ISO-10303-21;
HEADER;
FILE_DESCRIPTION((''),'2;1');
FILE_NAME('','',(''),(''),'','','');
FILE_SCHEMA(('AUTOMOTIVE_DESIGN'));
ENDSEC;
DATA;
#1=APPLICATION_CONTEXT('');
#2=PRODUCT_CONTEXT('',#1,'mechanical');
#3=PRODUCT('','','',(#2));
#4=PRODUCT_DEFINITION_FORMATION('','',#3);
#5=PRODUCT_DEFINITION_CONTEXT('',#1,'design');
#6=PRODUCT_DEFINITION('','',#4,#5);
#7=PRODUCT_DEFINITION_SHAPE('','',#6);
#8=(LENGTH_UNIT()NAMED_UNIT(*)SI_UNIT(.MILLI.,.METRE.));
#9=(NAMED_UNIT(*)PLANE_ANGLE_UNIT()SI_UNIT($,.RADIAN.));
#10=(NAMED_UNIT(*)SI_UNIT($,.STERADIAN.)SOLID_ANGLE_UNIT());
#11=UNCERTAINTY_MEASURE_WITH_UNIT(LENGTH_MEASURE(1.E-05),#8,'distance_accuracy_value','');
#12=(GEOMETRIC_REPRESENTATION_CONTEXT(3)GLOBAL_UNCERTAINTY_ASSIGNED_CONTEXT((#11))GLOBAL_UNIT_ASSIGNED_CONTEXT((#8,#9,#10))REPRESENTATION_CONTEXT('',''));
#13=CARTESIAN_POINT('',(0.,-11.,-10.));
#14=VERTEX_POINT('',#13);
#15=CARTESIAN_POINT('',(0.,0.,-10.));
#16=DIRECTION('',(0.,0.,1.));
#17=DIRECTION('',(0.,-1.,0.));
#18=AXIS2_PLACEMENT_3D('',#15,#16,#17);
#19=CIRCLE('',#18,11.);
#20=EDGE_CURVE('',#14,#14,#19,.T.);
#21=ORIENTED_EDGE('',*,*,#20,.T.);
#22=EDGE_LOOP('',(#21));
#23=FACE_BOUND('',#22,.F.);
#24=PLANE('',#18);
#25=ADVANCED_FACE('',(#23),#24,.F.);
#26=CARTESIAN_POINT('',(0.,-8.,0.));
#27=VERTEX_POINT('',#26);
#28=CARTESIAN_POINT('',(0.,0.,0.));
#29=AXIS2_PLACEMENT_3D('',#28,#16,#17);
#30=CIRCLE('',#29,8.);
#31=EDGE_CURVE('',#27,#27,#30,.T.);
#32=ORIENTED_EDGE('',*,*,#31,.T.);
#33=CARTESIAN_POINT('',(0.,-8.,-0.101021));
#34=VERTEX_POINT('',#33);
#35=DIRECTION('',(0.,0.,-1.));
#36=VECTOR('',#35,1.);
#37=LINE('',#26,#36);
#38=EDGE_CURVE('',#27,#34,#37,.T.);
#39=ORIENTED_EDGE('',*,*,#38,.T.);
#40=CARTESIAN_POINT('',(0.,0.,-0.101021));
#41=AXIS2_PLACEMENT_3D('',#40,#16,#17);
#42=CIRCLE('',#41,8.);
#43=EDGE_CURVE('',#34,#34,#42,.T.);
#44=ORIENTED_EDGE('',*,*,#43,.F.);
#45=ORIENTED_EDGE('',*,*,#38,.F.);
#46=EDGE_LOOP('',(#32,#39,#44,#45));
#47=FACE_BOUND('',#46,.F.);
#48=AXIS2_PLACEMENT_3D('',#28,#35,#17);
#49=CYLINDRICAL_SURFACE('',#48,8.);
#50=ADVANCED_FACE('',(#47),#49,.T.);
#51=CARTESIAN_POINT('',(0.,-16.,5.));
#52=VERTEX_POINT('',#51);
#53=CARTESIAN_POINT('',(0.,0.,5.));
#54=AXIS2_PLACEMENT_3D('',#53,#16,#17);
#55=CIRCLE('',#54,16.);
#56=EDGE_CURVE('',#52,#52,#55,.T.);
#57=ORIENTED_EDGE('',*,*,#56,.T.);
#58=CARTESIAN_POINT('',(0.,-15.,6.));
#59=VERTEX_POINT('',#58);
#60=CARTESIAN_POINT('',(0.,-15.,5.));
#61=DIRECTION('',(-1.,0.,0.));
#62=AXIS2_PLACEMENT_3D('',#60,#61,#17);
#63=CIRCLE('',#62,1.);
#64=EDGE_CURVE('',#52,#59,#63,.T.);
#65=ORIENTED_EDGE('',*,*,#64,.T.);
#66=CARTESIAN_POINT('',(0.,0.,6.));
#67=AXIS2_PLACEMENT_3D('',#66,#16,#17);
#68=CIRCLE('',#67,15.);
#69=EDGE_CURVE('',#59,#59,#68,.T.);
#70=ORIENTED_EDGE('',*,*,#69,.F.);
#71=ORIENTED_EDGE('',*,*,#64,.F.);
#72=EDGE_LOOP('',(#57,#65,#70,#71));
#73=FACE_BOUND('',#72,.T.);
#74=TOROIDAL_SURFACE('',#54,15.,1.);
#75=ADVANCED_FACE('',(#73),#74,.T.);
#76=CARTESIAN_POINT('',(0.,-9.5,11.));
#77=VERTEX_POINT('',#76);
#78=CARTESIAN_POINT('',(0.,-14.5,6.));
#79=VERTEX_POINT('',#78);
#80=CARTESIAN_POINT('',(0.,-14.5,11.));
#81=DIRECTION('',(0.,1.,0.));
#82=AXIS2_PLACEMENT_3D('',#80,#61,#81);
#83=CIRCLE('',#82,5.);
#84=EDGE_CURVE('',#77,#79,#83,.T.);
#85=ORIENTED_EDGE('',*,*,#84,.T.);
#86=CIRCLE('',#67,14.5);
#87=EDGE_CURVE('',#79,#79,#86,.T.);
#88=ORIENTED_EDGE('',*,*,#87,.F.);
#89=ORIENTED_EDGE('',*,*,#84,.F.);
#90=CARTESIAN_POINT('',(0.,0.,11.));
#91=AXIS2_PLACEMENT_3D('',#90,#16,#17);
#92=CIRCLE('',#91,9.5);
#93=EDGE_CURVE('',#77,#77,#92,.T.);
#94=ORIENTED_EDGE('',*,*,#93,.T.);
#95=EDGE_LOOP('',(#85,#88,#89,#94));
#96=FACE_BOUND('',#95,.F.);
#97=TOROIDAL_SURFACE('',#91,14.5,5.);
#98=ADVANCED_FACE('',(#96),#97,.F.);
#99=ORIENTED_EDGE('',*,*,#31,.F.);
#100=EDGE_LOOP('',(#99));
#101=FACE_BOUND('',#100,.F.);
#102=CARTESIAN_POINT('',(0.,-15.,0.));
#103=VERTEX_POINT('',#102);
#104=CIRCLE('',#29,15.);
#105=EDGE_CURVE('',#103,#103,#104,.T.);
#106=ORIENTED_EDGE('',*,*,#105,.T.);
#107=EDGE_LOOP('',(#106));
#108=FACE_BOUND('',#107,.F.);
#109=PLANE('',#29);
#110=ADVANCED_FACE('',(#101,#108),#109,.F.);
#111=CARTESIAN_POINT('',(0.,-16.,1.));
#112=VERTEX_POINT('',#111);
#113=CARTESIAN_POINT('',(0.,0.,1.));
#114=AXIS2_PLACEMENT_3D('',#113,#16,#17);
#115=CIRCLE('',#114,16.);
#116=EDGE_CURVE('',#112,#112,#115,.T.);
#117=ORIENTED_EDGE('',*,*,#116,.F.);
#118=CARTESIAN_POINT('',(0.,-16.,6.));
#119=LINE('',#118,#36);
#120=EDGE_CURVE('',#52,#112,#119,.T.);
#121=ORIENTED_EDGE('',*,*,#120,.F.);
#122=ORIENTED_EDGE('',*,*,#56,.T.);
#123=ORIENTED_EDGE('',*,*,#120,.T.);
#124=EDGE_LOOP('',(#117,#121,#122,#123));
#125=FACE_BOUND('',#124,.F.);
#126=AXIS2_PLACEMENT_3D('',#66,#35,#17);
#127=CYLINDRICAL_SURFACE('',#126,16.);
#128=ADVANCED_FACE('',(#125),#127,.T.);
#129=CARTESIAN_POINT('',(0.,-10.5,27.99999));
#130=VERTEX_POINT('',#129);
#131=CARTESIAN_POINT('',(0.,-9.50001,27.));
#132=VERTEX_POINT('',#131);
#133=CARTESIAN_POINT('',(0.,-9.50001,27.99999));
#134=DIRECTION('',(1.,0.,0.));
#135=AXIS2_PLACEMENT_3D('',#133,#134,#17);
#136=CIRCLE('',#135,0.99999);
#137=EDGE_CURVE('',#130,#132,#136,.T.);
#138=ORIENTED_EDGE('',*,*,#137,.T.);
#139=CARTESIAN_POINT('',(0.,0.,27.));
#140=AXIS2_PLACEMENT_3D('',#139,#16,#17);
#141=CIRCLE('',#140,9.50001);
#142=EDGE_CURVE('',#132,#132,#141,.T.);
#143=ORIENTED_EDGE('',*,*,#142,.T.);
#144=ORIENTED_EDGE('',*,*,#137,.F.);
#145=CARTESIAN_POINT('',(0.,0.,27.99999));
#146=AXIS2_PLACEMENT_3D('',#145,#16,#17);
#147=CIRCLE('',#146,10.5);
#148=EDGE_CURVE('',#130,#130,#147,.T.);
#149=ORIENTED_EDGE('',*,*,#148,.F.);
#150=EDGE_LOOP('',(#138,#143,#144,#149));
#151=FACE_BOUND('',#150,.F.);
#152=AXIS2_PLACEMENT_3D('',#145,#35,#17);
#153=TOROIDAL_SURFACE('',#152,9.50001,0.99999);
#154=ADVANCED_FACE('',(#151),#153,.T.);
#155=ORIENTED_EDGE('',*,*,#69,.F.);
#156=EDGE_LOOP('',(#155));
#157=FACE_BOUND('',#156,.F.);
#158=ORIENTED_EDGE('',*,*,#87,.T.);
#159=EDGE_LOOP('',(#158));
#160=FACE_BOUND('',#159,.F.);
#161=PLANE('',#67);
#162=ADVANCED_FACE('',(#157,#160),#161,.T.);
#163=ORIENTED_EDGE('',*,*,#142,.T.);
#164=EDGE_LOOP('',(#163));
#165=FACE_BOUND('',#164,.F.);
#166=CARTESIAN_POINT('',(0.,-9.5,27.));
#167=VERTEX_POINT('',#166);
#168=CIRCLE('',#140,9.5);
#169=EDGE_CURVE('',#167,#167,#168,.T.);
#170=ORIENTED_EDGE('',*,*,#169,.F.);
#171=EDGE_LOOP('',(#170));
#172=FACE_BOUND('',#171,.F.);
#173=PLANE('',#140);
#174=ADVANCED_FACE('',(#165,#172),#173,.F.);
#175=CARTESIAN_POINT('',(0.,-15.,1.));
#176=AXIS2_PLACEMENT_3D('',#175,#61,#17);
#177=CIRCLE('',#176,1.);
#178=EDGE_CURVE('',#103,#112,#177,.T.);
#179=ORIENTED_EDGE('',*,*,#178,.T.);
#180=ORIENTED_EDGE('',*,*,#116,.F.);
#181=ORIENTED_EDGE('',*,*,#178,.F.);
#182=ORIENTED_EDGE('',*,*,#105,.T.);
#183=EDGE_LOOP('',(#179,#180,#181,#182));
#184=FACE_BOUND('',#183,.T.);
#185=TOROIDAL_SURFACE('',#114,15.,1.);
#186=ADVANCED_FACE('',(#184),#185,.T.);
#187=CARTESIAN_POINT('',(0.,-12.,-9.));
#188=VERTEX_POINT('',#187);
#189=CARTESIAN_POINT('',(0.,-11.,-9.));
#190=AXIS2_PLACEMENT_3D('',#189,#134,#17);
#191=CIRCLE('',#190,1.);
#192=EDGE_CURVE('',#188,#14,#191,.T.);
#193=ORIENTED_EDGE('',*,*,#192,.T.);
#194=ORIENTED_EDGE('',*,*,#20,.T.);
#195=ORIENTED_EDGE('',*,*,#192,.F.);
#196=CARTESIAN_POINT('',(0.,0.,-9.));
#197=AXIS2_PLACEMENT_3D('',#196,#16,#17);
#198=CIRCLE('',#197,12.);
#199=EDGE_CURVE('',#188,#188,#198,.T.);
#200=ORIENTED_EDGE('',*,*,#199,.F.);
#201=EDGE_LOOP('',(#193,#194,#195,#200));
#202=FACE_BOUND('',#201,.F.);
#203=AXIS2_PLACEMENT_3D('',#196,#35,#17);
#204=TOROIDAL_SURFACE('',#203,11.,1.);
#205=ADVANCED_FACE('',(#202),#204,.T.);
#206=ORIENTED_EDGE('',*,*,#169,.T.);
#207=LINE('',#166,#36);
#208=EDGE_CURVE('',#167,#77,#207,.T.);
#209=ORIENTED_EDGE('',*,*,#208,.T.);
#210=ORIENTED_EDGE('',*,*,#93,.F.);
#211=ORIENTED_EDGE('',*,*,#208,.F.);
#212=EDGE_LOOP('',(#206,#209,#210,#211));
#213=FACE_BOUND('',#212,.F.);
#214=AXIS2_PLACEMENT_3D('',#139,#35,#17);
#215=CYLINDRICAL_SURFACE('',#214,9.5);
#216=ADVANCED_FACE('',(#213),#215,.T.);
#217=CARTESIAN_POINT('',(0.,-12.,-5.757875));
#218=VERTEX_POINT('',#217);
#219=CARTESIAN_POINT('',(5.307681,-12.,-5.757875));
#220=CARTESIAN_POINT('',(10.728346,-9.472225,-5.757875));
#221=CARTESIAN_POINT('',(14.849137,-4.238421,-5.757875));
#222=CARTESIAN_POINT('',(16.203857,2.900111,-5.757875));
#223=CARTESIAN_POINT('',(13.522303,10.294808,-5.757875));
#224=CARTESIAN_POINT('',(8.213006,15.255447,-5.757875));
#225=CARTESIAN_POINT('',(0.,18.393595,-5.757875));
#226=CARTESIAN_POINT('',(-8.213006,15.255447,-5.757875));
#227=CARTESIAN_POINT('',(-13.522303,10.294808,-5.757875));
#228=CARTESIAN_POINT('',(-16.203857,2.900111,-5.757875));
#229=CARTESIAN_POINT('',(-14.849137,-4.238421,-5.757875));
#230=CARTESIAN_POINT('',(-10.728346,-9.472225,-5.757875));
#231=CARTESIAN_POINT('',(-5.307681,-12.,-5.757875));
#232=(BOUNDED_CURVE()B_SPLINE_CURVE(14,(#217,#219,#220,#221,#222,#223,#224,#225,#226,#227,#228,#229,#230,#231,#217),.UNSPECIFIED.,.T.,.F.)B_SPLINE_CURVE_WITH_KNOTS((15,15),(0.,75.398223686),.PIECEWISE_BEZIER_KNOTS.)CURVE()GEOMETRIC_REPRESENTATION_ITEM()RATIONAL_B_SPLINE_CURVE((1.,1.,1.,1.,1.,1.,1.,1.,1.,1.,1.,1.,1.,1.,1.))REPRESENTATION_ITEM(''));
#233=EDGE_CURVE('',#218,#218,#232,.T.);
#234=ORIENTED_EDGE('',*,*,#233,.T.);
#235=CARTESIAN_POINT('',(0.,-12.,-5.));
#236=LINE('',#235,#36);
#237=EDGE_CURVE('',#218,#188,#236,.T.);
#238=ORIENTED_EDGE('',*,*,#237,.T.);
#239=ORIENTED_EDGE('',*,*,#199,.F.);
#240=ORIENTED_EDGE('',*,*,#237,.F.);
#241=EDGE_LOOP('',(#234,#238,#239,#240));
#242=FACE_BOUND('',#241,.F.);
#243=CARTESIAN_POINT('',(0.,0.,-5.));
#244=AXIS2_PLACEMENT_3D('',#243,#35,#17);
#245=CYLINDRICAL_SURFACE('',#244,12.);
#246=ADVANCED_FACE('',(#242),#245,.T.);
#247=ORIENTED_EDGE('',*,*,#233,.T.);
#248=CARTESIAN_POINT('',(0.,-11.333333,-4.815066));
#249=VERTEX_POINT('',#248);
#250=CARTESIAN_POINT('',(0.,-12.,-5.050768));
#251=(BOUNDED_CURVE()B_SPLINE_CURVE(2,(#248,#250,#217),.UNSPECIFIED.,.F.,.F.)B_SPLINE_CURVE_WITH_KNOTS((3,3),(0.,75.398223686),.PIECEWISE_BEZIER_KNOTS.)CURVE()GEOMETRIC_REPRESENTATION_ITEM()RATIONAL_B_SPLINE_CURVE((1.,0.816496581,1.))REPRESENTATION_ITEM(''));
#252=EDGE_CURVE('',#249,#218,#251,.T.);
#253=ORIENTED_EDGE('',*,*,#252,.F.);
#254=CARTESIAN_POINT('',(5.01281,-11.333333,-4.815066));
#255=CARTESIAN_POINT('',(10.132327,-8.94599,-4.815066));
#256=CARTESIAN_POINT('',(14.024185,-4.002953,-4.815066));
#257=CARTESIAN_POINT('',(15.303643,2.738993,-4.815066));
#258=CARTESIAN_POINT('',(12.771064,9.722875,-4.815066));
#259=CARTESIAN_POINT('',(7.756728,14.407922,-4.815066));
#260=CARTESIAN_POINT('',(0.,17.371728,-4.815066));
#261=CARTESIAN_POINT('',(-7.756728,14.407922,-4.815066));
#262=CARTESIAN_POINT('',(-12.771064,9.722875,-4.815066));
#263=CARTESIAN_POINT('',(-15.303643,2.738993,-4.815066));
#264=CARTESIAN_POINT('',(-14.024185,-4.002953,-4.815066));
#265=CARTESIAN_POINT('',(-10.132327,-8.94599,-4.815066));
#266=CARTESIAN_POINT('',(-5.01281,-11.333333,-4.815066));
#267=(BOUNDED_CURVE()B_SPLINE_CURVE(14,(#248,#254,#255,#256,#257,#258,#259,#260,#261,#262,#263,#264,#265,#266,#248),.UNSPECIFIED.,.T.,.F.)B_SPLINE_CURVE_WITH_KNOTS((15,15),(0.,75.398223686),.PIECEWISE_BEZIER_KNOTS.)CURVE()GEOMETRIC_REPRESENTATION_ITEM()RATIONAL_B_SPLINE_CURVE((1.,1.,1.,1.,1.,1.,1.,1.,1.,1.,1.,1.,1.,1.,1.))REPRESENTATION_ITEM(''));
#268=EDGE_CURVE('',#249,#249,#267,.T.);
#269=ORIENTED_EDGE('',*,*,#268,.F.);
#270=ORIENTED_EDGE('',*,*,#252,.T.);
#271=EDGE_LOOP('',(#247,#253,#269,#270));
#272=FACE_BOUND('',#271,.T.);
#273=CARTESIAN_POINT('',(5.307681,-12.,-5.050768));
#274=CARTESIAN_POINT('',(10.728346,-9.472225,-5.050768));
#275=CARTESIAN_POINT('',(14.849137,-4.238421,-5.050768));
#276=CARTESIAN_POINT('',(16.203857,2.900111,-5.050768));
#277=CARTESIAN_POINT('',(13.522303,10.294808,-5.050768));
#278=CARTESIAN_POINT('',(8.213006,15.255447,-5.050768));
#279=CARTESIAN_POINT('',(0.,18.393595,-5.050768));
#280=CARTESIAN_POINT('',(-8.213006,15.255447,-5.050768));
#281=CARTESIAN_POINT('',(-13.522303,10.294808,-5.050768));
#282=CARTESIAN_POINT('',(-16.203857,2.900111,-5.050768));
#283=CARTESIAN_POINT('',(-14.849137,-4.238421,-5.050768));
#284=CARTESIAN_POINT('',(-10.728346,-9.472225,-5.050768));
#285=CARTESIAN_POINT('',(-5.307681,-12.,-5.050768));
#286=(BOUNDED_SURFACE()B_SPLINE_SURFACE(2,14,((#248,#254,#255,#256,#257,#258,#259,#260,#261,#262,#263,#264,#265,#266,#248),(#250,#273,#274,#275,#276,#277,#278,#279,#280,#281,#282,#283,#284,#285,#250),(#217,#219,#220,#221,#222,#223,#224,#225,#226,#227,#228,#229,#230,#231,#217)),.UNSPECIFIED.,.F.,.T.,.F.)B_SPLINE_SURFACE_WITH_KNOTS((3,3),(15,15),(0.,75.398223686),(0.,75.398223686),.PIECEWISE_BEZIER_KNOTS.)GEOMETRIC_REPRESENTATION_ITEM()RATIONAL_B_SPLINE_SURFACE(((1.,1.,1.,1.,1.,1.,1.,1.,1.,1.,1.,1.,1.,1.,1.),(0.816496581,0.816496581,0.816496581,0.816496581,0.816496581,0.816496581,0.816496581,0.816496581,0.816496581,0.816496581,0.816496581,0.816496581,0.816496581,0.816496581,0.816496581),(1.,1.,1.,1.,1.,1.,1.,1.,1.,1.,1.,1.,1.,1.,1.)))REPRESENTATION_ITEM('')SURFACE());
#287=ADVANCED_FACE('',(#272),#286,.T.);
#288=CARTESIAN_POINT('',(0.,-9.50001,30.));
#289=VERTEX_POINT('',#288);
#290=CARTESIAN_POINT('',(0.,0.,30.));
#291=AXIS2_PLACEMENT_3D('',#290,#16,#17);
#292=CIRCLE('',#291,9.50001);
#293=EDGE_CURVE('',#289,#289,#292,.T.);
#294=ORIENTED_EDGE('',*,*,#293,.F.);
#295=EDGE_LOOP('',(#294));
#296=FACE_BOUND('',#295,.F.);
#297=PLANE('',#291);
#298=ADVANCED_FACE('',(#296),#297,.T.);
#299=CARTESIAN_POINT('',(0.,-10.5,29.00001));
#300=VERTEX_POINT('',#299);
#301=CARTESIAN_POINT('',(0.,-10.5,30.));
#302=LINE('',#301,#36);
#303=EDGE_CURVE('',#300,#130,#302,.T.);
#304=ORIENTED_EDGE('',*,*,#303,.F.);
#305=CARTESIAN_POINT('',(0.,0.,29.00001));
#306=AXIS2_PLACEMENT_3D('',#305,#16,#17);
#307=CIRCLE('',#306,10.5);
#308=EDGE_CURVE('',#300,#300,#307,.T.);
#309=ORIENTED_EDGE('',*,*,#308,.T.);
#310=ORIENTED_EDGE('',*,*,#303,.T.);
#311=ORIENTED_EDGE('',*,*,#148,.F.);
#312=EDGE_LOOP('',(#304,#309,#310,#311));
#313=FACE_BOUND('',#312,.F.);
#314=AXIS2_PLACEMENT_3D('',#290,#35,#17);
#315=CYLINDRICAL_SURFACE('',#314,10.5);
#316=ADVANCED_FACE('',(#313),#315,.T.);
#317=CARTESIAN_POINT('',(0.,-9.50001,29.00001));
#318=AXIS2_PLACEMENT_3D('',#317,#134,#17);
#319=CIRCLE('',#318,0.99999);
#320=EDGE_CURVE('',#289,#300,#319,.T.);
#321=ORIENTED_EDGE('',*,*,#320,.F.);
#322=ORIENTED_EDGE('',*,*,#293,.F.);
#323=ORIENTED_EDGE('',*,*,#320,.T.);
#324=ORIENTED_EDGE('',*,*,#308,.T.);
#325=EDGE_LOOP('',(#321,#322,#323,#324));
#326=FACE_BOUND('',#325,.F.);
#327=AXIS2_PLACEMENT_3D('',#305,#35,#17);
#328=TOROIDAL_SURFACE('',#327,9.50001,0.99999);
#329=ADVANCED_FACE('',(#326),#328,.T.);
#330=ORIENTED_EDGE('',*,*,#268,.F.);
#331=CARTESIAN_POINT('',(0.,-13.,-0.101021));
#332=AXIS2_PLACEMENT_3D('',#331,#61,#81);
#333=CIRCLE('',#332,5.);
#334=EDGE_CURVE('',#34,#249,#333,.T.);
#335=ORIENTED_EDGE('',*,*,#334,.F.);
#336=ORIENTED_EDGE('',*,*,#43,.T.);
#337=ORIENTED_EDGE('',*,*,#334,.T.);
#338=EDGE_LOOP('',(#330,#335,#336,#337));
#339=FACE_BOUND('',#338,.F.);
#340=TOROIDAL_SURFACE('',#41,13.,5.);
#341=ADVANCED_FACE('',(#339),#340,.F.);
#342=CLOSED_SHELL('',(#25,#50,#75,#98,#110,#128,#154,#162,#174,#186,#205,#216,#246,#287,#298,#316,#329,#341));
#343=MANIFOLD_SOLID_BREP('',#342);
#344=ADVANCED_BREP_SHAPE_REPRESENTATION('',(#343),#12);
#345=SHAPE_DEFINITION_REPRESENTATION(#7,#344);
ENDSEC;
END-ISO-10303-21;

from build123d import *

# Parameters (mm, degrees)
F2_R = 0.99999
F4_R = 1


# Not quite as in the source:
# - a fillet or chamfer that OpenCascade refuses, or shapes differently, is made with other operations: its cross-section is extruded or revolved along the edge and cut away or added
# - a fillet or chamfer is up to 0.001 mm smaller than in the source, because OpenCascade refuses the exact size


with BuildPart() as f1:
    # F0 (on Right) → F1 (revolve)
    with BuildSketch(Plane.YZ):
        Polygon((0, -10), (0, 0), (-8, 0), (-8, -5), (-12, -5), (-12, -10), align=None)
        Polygon((-8, 0), (0, 0), (0, 30), (-10.5, 30), (-10.5, 27), (-9.5, 27), (-9.5, 6), (-16, 6), (-16, 0), align=None)
    revolve(axis=Axis((0, 0, 25.4025327901), (0, 0, 1)))

    # F2 (radius 1 in the source; OpenCascade refuses exactly that, so slightly less here)
    f2_edges = [f1.edges().sort_by_distance(p)[0] for p in [
        (0, 10.5, 30),
        (0, 10.5, 27),
    ]]
    fillet(f2_edges, radius=F2_R)

    # F3: fillet of radius 5 on 2 edges, made by hand

    # F3_s1 → F3_t2 (revolve)
    with BuildSketch(Plane.YZ):
        with BuildLine():
            ThreePointArc((-9.5, 11), (-10.9644660941, 7.4644660941), (-14.5, 6))
            Line((-14.5, 6), (-9.5, 6))
            Line((-9.5, 6), (-9.5, 11))
        make_face()
    revolve(axis=Axis((0, 0, 6), (0, 0, 1)))

    # F3_s3 → F3_t4 (revolve)
    with BuildSketch(Plane.YZ):
        with BuildLine():
            ThreePointArc((-8, -0.1010205144), (-9.1270166538, -3.2632981746), (-12, -5))
            Line((-12, -5), (-8, -5))
            Line((-8, -5), (-8, -0.1010205144))
        make_face()
    revolve(axis=Axis((0, 0, -5), (0, 0, 1)))

    # F4
    f4_edges = [f1.edges().sort_by_distance(p)[0] for p in [
        (0, 16, 6),
        (0, 16, 0),
        (0, 12, -5),
        (0, 12, -10),
    ]]
    fillet(f4_edges, radius=F4_R)


solid = f1.part
